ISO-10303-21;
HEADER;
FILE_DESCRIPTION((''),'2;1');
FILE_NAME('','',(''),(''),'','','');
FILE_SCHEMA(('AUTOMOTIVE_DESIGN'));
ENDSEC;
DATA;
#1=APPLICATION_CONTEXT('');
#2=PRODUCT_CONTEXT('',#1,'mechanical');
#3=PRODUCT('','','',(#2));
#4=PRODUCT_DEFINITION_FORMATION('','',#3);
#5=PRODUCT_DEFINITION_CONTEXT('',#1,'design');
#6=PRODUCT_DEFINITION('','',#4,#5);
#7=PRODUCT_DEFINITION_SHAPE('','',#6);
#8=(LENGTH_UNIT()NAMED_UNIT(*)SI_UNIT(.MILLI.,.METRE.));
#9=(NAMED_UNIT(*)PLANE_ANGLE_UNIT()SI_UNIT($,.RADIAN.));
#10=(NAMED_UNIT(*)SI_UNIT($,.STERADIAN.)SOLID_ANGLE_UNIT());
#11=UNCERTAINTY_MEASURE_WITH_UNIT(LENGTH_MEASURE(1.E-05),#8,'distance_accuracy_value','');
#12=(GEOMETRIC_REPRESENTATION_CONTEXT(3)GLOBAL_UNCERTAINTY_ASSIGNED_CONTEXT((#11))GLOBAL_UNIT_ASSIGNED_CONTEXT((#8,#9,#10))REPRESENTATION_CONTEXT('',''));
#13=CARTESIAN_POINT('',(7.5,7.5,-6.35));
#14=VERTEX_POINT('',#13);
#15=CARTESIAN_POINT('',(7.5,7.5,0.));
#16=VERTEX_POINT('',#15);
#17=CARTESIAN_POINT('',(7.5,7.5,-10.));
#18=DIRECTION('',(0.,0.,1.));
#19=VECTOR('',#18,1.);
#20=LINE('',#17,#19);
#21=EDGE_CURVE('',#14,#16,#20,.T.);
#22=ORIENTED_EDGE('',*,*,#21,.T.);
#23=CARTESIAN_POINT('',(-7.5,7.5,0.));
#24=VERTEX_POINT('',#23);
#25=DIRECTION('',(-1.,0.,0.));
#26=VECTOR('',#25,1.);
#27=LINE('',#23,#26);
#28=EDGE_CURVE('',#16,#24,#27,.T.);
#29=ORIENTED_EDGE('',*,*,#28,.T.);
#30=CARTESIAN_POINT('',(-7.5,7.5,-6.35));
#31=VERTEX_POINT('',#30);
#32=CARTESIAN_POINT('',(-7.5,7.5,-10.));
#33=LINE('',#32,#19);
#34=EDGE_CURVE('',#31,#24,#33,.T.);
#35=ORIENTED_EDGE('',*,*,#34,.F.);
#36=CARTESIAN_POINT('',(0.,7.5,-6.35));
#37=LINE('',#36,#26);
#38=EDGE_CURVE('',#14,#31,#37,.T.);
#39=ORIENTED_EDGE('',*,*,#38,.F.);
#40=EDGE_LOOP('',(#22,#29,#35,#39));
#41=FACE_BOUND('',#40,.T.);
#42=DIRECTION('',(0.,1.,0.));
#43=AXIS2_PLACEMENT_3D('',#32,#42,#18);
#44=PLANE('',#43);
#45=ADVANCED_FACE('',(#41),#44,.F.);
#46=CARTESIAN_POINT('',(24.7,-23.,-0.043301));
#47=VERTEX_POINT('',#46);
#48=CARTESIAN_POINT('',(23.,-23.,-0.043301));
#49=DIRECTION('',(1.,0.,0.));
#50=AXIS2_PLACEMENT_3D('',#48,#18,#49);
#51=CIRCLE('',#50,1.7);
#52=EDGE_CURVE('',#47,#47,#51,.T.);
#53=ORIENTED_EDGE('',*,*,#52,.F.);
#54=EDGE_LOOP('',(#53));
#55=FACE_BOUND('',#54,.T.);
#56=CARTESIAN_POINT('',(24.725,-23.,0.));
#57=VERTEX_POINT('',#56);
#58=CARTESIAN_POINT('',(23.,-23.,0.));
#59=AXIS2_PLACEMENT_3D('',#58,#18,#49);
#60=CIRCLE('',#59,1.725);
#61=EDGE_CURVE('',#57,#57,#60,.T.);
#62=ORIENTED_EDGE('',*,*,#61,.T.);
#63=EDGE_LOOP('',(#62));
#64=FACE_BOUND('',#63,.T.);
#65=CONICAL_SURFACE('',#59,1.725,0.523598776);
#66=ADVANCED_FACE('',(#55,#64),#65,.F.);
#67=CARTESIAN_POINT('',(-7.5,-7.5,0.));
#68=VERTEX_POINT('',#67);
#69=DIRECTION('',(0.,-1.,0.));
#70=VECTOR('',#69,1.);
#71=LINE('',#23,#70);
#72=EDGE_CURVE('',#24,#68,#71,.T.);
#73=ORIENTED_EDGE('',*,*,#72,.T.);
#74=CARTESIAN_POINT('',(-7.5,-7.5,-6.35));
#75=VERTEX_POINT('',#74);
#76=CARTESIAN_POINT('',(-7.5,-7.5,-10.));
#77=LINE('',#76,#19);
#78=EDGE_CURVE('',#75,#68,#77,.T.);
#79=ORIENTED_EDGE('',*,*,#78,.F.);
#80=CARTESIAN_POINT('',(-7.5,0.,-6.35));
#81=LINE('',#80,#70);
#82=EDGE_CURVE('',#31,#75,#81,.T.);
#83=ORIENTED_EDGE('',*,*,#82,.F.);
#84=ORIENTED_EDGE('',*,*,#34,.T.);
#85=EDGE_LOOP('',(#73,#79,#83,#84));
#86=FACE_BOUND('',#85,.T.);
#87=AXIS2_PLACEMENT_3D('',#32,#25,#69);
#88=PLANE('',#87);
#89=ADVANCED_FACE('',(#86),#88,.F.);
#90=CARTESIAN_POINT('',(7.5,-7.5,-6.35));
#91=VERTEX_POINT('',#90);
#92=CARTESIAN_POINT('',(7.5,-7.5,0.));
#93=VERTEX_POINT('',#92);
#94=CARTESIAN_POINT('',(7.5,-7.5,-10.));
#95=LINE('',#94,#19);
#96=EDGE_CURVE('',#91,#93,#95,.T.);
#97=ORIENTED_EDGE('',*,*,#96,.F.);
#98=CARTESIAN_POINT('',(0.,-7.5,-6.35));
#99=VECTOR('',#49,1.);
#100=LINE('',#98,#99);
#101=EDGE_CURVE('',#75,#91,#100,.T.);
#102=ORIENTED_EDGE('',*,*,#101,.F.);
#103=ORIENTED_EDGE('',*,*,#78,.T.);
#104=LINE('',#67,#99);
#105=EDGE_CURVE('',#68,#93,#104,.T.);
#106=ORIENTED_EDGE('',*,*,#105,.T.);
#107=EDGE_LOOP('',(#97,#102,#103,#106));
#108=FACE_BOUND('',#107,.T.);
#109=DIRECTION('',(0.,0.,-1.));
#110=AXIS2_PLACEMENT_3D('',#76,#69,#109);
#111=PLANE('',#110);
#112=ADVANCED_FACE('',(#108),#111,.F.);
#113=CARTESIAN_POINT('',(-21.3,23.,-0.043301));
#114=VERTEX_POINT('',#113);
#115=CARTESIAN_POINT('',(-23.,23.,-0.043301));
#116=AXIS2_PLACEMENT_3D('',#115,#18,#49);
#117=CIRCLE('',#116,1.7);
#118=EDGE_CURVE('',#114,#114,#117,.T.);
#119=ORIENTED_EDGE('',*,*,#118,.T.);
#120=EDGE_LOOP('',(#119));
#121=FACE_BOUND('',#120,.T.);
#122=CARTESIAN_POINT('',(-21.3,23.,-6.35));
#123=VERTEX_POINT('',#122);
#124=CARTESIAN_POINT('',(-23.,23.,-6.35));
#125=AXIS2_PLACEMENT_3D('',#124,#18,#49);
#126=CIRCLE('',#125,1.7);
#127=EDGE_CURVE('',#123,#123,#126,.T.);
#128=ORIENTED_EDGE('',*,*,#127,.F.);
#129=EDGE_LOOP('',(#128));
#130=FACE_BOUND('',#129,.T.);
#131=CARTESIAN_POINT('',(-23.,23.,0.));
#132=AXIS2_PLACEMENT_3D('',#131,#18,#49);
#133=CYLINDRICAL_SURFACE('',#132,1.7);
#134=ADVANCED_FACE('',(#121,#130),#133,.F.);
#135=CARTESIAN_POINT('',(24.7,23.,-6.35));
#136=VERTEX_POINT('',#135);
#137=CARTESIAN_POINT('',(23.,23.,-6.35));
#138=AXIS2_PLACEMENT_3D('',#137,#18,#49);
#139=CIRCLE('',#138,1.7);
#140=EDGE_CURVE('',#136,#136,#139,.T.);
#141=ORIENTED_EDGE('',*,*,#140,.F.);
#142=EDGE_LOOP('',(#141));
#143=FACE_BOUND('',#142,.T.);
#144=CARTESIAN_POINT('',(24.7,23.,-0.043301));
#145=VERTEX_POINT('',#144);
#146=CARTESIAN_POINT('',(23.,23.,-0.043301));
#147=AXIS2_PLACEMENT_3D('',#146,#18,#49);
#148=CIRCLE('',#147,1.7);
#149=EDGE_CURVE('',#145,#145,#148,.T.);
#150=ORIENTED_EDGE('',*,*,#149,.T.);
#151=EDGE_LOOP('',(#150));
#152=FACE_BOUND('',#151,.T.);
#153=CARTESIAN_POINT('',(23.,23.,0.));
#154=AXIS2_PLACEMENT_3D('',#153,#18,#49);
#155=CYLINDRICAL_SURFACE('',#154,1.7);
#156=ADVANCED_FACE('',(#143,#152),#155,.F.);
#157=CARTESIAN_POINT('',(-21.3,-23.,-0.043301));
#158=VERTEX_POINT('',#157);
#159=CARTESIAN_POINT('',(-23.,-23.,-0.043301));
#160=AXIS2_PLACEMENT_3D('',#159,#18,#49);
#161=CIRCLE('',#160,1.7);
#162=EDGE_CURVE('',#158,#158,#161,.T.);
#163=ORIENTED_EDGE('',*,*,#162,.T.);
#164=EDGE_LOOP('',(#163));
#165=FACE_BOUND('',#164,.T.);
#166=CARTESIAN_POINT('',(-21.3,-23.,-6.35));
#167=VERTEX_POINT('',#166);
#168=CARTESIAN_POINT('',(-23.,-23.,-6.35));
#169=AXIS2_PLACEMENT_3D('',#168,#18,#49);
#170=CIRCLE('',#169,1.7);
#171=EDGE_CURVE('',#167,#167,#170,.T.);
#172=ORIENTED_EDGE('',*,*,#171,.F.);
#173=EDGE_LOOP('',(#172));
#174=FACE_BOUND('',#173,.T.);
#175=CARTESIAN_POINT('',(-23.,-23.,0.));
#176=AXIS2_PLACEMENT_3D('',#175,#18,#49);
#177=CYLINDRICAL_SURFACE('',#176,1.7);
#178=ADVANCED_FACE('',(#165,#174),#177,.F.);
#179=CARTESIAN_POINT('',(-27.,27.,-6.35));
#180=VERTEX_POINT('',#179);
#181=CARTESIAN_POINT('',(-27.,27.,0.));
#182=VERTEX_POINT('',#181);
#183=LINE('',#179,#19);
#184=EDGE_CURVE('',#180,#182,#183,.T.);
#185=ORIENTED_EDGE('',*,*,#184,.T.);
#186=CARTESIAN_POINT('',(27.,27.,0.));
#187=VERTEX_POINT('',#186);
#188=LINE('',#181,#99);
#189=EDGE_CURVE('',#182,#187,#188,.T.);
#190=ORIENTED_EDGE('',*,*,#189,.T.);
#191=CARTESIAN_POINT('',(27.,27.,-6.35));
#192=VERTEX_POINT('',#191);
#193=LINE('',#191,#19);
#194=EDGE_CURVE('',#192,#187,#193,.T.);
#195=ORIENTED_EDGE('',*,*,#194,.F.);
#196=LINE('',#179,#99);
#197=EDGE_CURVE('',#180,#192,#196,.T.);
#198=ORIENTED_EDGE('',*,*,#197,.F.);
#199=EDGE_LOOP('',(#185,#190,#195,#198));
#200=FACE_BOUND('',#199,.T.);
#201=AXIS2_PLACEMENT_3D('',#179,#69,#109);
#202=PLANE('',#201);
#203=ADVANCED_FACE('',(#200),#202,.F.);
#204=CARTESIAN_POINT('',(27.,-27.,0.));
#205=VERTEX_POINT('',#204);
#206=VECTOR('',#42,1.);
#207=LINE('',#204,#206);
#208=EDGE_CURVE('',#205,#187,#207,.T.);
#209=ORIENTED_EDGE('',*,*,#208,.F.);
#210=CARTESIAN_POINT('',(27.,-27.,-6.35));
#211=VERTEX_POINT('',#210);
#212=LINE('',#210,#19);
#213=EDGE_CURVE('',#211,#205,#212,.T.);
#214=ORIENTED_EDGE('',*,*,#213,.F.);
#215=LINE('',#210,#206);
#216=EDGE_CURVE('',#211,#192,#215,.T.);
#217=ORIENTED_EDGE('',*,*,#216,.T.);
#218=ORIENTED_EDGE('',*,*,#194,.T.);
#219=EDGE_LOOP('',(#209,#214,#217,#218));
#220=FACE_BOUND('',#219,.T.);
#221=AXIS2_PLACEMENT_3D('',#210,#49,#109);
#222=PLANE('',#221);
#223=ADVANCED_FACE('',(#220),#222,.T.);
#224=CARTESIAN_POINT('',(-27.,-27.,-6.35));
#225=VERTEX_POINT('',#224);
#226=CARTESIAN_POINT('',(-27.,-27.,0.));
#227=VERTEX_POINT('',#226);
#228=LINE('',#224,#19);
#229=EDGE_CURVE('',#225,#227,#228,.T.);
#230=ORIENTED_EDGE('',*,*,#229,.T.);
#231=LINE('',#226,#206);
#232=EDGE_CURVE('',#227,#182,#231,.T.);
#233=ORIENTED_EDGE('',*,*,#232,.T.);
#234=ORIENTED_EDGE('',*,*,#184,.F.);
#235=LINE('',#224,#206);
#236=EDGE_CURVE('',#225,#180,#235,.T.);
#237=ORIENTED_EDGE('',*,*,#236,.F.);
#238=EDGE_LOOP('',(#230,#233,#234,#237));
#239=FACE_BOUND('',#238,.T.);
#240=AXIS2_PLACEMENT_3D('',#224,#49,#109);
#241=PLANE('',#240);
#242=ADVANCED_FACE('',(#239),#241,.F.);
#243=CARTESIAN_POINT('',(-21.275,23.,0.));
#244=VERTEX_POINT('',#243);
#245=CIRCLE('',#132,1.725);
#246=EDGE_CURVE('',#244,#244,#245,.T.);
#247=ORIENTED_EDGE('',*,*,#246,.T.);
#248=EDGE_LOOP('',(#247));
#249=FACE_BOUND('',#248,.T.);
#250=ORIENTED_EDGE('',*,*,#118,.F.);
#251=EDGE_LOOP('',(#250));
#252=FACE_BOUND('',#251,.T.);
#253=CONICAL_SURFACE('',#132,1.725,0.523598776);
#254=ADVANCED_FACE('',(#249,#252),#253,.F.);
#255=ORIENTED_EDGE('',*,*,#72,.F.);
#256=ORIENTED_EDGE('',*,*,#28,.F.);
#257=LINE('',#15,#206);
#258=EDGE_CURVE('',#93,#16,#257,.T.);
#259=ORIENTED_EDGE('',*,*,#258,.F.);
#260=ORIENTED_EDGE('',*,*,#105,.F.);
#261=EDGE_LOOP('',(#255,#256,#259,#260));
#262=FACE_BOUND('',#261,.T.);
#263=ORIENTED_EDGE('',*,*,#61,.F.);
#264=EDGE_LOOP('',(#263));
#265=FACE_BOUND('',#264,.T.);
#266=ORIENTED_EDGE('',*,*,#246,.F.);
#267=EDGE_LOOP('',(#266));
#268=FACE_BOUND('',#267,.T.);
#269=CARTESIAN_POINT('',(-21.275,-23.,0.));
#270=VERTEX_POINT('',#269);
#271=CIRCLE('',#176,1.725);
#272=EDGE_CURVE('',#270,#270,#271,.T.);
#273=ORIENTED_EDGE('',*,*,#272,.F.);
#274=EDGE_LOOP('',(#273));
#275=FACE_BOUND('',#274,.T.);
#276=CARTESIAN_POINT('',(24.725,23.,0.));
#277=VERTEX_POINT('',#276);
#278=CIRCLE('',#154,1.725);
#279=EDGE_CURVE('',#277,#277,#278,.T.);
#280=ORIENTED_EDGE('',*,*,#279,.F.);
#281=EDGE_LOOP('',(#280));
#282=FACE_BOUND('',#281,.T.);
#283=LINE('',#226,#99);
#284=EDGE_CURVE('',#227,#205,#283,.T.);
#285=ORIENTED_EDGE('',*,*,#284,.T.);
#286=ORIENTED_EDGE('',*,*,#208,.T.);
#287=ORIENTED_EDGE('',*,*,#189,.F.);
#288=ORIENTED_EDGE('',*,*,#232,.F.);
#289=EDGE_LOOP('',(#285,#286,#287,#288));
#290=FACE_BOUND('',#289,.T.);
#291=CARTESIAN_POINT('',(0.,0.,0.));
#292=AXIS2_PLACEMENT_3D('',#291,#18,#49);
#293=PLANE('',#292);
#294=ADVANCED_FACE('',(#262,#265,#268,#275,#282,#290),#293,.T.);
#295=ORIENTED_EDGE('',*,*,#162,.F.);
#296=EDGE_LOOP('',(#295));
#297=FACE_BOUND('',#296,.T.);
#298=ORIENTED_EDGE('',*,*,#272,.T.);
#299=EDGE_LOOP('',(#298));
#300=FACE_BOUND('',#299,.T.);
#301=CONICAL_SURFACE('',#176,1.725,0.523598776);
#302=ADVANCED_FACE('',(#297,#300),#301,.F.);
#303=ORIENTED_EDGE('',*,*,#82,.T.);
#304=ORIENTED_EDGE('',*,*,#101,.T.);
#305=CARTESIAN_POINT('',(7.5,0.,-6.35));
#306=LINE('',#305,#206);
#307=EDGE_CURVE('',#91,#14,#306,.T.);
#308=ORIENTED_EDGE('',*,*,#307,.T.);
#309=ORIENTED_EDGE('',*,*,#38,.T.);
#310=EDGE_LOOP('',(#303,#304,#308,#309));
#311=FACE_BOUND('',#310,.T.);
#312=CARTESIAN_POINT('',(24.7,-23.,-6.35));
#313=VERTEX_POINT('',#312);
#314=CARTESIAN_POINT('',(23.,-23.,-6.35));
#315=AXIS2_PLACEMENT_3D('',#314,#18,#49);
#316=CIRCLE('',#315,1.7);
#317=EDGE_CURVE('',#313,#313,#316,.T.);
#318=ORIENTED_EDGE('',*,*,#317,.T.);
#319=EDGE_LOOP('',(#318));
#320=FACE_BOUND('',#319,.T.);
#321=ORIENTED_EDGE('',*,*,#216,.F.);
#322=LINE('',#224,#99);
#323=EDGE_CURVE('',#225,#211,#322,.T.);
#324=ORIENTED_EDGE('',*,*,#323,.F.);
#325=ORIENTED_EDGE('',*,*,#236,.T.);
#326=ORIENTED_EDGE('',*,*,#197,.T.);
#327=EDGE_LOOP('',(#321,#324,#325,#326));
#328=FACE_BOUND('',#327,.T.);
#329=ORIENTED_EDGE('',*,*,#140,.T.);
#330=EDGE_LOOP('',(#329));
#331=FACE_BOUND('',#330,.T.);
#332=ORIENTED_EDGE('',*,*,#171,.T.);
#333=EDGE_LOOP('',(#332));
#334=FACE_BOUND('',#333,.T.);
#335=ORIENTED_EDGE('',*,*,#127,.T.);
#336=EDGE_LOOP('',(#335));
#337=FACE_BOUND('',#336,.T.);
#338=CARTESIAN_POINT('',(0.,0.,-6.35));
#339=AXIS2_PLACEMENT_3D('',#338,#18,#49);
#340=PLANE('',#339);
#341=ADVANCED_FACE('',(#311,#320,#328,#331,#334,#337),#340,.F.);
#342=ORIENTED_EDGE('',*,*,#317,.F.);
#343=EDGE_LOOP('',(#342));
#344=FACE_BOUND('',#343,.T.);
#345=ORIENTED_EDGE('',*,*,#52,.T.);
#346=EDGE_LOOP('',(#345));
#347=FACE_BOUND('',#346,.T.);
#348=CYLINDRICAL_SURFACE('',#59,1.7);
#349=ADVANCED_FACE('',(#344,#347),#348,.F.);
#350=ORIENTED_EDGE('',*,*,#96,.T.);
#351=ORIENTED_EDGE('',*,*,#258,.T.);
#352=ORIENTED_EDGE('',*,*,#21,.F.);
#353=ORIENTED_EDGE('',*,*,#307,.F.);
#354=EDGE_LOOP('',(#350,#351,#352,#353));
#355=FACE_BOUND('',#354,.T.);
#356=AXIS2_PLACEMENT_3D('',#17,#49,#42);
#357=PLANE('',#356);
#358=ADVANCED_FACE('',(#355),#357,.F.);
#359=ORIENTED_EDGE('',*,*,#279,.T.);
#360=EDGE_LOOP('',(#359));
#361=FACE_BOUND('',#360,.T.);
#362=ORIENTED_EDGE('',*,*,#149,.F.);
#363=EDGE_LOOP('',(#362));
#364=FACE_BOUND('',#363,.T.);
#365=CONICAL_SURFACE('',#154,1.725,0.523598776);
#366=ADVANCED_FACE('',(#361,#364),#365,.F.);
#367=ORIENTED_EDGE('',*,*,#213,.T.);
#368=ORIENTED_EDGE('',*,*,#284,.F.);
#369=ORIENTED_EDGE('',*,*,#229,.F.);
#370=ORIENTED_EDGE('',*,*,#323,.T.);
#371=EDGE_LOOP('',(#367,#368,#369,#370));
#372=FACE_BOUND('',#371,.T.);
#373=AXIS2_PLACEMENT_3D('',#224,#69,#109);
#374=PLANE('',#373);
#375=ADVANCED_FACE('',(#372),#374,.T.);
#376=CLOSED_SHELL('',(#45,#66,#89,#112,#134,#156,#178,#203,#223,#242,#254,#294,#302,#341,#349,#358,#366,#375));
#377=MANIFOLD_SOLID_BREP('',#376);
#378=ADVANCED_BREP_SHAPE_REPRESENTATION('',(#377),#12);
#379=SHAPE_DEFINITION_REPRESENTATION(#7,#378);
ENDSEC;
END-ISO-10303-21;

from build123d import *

# Parameters (mm, degrees)
SKETCH1_W           = 54
SKETCH1_H           = 54
BOSS_EXTRUDE1_DEPTH = 6.35
SKETCH6_W           = 15
SKETCH6_H           = 15
CUT_EXTRUDE1_DEPTH  = 10


# Read off the part's stored shape, not the designer's step: M3 Clearance Hole1
with BuildPart() as part:
    # Sketch1 → Boss-Extrude1 (new body)
    with BuildSketch(Plane.XY):
        Rectangle(SKETCH1_W, SKETCH1_H)
    extrude(amount=-BOSS_EXTRUDE1_DEPTH)

    # M3 Clearance Hole1 outline → M3 Clearance Hole1 (revolve, cut)
    with BuildSketch(Plane(origin=(23, -23, 0), x_dir=(1, 0, 0), z_dir=(0, -1, 0))):
        Polygon((0, -6.35), (1.7, -6.35), (1.7, -0.04330127), (1.725, 0), (0, 0), align=None)
    revolve(axis=Axis((23, -23, 0), (0, 0, 1)), mode=Mode.SUBTRACT)

    # M3 Clearance Hole1 2 outline → M3 Clearance Hole1 2 (revolve, cut)
    with BuildSketch(Plane(origin=(-23, 23, 0), x_dir=(1, 0, 0), z_dir=(0, -1, 0))):
        Polygon((0, -6.35), (1.7, -6.35), (1.7, -0.04330127), (1.725, 0), (0, 0), align=None)
    revolve(axis=Axis((-23, 23, 0), (0, 0, 1)), mode=Mode.SUBTRACT)

    # M3 Clearance Hole1 3 outline → M3 Clearance Hole1 3 (revolve, cut)
    with BuildSketch(Plane(origin=(-23, -23, 0), x_dir=(1, 0, 0), z_dir=(0, -1, 0))):
        Polygon((0, -6.35), (1.7, -6.35), (1.7, -0.04330127), (1.725, 0), (0, 0), align=None)
    revolve(axis=Axis((-23, -23, 0), (0, 0, 1)), mode=Mode.SUBTRACT)

    # M3 Clearance Hole1 4 outline → M3 Clearance Hole1 4 (revolve, cut)
    with BuildSketch(Plane(origin=(23, 23, 0), x_dir=(1, 0, 0), z_dir=(0, -1, 0))):
        Polygon((0, -6.35), (1.7, -6.35), (1.7, -0.04330127), (1.725, 0), (0, 0), align=None)
    revolve(axis=Axis((23, 23, 0), (0, 0, 1)), mode=Mode.SUBTRACT)

    # Sketch6 → Cut-Extrude1 (cut)
    with BuildSketch(Plane.XY):
        Rectangle(SKETCH6_W, SKETCH6_H)
    extrude(amount=-CUT_EXTRUDE1_DEPTH, mode=Mode.SUBTRACT)


solid = part.part
